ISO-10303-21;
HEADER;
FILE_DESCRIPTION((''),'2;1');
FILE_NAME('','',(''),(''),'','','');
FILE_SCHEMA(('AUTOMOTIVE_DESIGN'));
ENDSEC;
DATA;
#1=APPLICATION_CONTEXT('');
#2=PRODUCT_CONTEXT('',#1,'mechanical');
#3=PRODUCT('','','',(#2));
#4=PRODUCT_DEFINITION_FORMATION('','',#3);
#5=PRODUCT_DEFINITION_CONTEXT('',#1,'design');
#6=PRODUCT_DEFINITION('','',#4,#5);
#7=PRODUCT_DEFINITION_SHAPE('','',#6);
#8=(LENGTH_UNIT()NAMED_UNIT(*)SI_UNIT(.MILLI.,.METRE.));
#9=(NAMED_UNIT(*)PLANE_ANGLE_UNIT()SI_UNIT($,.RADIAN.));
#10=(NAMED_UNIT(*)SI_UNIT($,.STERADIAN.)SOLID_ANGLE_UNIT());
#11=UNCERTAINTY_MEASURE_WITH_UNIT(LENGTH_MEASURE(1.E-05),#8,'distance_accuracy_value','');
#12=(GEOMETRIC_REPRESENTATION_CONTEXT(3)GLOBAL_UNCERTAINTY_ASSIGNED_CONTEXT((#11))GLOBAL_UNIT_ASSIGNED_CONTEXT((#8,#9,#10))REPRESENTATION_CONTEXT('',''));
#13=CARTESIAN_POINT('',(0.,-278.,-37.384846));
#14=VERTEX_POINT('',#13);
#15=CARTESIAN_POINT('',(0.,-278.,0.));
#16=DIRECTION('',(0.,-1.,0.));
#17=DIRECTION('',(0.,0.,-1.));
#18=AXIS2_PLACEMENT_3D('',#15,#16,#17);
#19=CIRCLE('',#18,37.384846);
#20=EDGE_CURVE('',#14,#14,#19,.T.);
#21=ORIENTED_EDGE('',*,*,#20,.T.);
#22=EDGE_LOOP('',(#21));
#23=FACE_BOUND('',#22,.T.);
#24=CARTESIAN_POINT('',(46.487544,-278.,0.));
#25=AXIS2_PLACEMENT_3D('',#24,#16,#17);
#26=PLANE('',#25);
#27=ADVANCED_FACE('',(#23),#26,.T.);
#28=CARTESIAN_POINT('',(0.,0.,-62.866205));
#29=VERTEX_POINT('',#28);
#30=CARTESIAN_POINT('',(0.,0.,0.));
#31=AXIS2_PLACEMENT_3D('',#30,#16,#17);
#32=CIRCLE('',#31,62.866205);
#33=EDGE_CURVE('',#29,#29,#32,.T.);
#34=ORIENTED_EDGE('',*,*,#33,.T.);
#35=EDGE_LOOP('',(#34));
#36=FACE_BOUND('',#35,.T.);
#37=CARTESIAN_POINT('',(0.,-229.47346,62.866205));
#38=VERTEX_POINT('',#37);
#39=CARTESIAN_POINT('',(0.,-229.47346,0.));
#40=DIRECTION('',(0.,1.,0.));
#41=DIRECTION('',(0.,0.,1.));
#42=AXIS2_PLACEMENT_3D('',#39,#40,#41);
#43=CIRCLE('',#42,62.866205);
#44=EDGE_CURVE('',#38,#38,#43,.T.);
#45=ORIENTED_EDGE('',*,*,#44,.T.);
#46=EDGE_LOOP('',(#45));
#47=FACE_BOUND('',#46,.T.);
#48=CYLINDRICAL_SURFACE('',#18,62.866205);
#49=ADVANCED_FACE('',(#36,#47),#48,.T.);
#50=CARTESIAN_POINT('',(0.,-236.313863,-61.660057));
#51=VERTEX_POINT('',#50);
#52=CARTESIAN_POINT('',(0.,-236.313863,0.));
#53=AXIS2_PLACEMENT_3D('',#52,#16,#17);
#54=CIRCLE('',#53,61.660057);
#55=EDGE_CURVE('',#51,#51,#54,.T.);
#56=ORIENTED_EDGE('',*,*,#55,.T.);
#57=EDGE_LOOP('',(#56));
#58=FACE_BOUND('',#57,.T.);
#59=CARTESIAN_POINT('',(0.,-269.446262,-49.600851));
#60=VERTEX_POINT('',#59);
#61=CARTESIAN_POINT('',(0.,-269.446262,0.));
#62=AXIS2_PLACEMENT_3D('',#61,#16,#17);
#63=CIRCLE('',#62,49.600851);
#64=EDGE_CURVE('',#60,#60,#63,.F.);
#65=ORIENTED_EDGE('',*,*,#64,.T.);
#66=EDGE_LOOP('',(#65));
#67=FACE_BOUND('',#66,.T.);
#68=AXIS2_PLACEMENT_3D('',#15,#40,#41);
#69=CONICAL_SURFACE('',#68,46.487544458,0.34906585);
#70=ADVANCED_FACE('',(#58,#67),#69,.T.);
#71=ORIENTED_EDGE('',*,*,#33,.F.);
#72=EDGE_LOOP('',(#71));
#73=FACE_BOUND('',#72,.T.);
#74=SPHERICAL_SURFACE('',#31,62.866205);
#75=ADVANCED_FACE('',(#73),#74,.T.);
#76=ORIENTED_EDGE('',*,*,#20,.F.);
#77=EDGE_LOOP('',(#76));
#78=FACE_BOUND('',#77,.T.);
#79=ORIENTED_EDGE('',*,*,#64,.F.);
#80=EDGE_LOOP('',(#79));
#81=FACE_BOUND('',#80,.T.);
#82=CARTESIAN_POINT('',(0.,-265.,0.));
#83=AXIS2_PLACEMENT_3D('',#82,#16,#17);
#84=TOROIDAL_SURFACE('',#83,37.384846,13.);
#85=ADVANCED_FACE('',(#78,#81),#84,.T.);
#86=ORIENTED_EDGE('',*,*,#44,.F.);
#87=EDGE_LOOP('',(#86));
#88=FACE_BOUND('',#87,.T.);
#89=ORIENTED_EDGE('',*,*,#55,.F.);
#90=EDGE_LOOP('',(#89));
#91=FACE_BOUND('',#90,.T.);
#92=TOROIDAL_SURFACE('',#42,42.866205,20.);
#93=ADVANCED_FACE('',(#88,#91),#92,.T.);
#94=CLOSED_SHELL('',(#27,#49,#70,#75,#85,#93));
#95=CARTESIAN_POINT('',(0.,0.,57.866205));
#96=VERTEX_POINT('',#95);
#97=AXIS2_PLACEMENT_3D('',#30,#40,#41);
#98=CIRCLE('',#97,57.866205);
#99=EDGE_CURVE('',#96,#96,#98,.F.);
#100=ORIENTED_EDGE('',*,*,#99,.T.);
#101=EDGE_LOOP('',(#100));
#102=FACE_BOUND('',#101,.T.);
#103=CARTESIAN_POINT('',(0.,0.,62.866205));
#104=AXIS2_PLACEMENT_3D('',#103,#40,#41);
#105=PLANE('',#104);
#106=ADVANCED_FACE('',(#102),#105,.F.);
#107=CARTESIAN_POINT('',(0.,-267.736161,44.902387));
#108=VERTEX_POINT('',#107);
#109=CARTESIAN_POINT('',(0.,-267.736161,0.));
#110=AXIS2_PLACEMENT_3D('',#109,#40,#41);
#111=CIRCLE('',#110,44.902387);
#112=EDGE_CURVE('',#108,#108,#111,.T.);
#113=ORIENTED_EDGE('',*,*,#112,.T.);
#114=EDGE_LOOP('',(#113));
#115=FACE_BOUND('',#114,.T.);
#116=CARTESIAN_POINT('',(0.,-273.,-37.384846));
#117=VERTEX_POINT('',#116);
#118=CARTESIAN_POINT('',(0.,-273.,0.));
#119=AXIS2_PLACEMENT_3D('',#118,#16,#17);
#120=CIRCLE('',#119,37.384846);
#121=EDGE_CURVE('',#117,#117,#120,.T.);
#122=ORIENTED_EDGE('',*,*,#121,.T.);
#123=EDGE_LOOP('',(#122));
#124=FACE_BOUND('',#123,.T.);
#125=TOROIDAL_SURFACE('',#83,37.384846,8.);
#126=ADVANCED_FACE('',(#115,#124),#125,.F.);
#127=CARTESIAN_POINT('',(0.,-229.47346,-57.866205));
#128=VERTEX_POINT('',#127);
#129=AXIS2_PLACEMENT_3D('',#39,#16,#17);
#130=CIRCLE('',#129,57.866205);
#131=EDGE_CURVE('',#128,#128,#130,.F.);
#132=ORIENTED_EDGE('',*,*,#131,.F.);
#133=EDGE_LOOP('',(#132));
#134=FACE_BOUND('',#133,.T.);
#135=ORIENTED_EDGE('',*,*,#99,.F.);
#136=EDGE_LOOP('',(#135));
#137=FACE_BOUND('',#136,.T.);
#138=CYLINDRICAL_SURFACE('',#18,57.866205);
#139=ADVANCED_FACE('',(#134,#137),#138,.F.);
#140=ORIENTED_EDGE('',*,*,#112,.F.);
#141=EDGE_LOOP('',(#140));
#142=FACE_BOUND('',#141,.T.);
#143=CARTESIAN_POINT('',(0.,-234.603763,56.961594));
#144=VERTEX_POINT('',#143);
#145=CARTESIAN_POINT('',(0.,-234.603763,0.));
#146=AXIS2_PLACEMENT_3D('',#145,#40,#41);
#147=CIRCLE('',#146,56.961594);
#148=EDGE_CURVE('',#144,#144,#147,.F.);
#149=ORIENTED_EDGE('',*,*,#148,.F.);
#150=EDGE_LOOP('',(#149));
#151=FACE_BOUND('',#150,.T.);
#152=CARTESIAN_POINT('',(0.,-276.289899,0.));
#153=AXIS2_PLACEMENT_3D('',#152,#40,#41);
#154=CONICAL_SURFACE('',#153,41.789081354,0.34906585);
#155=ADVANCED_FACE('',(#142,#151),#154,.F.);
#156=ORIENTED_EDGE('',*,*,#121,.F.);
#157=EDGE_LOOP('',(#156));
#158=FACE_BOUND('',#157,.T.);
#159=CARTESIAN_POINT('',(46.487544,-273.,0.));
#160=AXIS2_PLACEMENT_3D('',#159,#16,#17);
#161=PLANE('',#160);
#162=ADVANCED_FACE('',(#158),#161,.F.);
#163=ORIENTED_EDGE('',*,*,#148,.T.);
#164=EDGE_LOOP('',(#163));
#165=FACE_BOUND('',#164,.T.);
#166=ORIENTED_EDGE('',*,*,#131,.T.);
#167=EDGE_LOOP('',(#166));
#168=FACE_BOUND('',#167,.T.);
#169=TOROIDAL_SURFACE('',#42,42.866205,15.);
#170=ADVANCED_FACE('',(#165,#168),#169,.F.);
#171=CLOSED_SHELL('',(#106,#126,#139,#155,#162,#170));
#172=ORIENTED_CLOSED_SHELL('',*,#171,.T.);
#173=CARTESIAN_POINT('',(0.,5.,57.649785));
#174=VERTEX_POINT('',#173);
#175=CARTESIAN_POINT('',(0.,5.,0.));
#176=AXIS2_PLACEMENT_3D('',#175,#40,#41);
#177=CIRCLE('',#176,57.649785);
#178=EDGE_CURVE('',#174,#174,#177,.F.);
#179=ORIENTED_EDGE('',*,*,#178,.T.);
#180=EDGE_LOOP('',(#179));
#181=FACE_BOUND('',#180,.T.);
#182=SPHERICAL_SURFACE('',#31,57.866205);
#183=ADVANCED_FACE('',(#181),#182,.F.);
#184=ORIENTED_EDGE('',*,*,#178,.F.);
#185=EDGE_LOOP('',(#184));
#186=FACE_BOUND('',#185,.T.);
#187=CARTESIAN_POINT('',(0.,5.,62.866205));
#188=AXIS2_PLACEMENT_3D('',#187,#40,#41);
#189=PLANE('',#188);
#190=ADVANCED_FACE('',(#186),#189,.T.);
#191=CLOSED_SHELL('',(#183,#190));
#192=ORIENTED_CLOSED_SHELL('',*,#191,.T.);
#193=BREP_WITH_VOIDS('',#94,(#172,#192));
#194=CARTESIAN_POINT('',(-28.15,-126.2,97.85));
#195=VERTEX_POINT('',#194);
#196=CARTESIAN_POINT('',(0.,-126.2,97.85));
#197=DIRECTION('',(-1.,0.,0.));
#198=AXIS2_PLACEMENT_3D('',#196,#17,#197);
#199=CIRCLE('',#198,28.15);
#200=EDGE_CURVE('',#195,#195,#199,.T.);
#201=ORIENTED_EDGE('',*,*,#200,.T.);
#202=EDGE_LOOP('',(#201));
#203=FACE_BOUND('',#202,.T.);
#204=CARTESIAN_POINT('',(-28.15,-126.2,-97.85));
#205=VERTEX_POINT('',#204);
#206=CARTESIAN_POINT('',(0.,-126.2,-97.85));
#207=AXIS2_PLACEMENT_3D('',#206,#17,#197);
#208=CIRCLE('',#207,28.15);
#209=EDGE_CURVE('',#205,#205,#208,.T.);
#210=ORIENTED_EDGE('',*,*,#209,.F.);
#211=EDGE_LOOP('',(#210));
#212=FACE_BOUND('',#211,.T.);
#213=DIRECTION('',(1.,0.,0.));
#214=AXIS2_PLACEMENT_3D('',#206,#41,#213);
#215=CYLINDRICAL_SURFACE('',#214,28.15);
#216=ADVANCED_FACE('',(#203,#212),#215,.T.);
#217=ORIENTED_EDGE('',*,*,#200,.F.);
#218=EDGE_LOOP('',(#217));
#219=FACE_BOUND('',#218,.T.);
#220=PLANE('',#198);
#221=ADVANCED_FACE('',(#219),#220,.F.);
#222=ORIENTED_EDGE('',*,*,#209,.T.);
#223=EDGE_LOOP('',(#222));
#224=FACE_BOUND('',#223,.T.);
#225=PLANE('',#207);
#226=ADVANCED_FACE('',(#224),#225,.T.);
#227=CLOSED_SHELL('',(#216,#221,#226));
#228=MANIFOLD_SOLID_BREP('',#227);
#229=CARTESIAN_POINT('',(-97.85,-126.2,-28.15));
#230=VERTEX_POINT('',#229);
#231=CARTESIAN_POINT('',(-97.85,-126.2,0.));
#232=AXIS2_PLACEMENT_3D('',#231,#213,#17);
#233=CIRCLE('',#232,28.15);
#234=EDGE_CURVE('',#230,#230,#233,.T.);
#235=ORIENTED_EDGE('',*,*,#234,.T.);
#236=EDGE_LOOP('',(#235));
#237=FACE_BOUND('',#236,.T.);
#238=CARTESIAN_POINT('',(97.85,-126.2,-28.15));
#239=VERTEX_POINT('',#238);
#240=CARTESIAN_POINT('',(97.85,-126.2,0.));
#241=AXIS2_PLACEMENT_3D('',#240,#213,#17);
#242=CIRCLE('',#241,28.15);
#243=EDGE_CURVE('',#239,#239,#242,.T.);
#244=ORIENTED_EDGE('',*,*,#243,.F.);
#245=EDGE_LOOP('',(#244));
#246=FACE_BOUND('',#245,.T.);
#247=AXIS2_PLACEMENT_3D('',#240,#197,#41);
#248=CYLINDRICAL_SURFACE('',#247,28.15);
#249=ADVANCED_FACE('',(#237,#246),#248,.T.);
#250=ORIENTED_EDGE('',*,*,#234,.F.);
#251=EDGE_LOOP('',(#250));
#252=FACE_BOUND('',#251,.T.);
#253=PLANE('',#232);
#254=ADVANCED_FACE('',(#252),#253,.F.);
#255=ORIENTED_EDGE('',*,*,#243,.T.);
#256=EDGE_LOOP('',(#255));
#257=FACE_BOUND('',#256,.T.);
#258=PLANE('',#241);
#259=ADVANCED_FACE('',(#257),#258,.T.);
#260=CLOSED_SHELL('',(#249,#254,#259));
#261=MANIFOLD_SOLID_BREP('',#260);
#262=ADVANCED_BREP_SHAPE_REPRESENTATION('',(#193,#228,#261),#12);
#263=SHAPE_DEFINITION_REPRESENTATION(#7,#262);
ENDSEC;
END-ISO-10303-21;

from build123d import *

# Parameters (mm, degrees)
FILLET1_R             = 20
FILLET2_R             = 13
SHELL6_T              = -5
SKETCH3_R             = 28.15
BOSS_EXTRUDE1_DEPTH   = 97.85
BODY_MOVE_COPY1_ANGLE = 90


# Read off the part's stored shape, not the designer's step: Shell8
with BuildPart() as part:
    # Sketch1 → Revolve1 (revolve)
    with BuildSketch(Plane.XY, mode=Mode.PRIVATE) as revolve1_sk:
        Polygon((0, 0), (62.866205, 0), (62.866205, -233), (46.487544458, -278), (0, -278), align=None)
    revolve(revolve1_sk.sketch.rotate(Axis((0, -278, 0), (0, 1, 0)), 90), axis=Axis((0, -278, 0), (0, 1, 0)))

    # Fillet1
    fillet1_edges = [part.edges().sort_by_distance(p)[0] for p in [
        (0, -233, 62.866205),
    ]]
    fillet(fillet1_edges, radius=FILLET1_R)

    # Fillet2
    fillet2_edges = [part.edges().sort_by_distance(p)[0] for p in [
        (0, -278, 46.487544458),
    ]]
    fillet(fillet2_edges, radius=FILLET2_R)

    # Shell6
    shell6_openings = [part.faces().sort_by_distance(p)[0] for p in [
        (0, 0, 0),
    ]]
    offset(amount=SHELL6_T, openings=shell6_openings, kind=Kind.INTERSECTION)


with BuildPart() as body_2:
    # Sketch2 → Revolve3 (revolve)
    with BuildSketch(Plane(origin=(0, 0, 0), x_dir=(0, 0, -1), z_dir=(1, 0, 0)), mode=Mode.PRIVATE) as revolve3_sk:
        with BuildLine():
            Line((-62.866205, 0), (0, 0))
            Line((0, 0), (0, 62.866205))
            ThreePointArc((0, 62.866205), (-44.453119863, 44.453119863), (-62.866205, 0))
        make_face()
    revolve(revolve3_sk.sketch.rotate(Axis((0, 0, 0), (0, 1, 0)), 180), axis=Axis((0, 0, 0), (0, 1, 0)))

    # Shell8 outline → Shell8 (revolve, cut)
    with BuildSketch(Plane.XY):
        with BuildLine():
            Line((0, 5), (57.64978475, 4.999999942))
            ThreePointArc((57.64978475, 4.999999942), (39.109887877, 42.648732119), (0, 57.866205))
            Line((0, 57.866205), (0, 5))
        make_face()
    revolve(axis=Axis((0, 0, 0), (0, 1, 0)), mode=Mode.SUBTRACT)


with BuildPart() as part_1:
    add(part.part)

    # Combine1: union body 2
    add(body_2.part)


with BuildPart() as body_2_2:
    # Sketch3 → Boss-Extrude1 (new, symmetric)
    with BuildSketch(Plane(origin=(0, 0, 0), x_dir=(0, 0, -1), z_dir=(1, 0, 0))):
        with Locations((0, -126.2)):
            Circle(SKETCH3_R)
    extrude(amount=BOSS_EXTRUDE1_DEPTH, both=True)


with BuildPart() as body_3:
    # Body-Move/Copy1: copy of body 2 2
    add(body_2_2.part.rotate(Axis((0, 0, 0), (0, 1, 0)), BODY_MOVE_COPY1_ANGLE))


solid = Compound([part_1.part, body_2_2.part, body_3.part])
